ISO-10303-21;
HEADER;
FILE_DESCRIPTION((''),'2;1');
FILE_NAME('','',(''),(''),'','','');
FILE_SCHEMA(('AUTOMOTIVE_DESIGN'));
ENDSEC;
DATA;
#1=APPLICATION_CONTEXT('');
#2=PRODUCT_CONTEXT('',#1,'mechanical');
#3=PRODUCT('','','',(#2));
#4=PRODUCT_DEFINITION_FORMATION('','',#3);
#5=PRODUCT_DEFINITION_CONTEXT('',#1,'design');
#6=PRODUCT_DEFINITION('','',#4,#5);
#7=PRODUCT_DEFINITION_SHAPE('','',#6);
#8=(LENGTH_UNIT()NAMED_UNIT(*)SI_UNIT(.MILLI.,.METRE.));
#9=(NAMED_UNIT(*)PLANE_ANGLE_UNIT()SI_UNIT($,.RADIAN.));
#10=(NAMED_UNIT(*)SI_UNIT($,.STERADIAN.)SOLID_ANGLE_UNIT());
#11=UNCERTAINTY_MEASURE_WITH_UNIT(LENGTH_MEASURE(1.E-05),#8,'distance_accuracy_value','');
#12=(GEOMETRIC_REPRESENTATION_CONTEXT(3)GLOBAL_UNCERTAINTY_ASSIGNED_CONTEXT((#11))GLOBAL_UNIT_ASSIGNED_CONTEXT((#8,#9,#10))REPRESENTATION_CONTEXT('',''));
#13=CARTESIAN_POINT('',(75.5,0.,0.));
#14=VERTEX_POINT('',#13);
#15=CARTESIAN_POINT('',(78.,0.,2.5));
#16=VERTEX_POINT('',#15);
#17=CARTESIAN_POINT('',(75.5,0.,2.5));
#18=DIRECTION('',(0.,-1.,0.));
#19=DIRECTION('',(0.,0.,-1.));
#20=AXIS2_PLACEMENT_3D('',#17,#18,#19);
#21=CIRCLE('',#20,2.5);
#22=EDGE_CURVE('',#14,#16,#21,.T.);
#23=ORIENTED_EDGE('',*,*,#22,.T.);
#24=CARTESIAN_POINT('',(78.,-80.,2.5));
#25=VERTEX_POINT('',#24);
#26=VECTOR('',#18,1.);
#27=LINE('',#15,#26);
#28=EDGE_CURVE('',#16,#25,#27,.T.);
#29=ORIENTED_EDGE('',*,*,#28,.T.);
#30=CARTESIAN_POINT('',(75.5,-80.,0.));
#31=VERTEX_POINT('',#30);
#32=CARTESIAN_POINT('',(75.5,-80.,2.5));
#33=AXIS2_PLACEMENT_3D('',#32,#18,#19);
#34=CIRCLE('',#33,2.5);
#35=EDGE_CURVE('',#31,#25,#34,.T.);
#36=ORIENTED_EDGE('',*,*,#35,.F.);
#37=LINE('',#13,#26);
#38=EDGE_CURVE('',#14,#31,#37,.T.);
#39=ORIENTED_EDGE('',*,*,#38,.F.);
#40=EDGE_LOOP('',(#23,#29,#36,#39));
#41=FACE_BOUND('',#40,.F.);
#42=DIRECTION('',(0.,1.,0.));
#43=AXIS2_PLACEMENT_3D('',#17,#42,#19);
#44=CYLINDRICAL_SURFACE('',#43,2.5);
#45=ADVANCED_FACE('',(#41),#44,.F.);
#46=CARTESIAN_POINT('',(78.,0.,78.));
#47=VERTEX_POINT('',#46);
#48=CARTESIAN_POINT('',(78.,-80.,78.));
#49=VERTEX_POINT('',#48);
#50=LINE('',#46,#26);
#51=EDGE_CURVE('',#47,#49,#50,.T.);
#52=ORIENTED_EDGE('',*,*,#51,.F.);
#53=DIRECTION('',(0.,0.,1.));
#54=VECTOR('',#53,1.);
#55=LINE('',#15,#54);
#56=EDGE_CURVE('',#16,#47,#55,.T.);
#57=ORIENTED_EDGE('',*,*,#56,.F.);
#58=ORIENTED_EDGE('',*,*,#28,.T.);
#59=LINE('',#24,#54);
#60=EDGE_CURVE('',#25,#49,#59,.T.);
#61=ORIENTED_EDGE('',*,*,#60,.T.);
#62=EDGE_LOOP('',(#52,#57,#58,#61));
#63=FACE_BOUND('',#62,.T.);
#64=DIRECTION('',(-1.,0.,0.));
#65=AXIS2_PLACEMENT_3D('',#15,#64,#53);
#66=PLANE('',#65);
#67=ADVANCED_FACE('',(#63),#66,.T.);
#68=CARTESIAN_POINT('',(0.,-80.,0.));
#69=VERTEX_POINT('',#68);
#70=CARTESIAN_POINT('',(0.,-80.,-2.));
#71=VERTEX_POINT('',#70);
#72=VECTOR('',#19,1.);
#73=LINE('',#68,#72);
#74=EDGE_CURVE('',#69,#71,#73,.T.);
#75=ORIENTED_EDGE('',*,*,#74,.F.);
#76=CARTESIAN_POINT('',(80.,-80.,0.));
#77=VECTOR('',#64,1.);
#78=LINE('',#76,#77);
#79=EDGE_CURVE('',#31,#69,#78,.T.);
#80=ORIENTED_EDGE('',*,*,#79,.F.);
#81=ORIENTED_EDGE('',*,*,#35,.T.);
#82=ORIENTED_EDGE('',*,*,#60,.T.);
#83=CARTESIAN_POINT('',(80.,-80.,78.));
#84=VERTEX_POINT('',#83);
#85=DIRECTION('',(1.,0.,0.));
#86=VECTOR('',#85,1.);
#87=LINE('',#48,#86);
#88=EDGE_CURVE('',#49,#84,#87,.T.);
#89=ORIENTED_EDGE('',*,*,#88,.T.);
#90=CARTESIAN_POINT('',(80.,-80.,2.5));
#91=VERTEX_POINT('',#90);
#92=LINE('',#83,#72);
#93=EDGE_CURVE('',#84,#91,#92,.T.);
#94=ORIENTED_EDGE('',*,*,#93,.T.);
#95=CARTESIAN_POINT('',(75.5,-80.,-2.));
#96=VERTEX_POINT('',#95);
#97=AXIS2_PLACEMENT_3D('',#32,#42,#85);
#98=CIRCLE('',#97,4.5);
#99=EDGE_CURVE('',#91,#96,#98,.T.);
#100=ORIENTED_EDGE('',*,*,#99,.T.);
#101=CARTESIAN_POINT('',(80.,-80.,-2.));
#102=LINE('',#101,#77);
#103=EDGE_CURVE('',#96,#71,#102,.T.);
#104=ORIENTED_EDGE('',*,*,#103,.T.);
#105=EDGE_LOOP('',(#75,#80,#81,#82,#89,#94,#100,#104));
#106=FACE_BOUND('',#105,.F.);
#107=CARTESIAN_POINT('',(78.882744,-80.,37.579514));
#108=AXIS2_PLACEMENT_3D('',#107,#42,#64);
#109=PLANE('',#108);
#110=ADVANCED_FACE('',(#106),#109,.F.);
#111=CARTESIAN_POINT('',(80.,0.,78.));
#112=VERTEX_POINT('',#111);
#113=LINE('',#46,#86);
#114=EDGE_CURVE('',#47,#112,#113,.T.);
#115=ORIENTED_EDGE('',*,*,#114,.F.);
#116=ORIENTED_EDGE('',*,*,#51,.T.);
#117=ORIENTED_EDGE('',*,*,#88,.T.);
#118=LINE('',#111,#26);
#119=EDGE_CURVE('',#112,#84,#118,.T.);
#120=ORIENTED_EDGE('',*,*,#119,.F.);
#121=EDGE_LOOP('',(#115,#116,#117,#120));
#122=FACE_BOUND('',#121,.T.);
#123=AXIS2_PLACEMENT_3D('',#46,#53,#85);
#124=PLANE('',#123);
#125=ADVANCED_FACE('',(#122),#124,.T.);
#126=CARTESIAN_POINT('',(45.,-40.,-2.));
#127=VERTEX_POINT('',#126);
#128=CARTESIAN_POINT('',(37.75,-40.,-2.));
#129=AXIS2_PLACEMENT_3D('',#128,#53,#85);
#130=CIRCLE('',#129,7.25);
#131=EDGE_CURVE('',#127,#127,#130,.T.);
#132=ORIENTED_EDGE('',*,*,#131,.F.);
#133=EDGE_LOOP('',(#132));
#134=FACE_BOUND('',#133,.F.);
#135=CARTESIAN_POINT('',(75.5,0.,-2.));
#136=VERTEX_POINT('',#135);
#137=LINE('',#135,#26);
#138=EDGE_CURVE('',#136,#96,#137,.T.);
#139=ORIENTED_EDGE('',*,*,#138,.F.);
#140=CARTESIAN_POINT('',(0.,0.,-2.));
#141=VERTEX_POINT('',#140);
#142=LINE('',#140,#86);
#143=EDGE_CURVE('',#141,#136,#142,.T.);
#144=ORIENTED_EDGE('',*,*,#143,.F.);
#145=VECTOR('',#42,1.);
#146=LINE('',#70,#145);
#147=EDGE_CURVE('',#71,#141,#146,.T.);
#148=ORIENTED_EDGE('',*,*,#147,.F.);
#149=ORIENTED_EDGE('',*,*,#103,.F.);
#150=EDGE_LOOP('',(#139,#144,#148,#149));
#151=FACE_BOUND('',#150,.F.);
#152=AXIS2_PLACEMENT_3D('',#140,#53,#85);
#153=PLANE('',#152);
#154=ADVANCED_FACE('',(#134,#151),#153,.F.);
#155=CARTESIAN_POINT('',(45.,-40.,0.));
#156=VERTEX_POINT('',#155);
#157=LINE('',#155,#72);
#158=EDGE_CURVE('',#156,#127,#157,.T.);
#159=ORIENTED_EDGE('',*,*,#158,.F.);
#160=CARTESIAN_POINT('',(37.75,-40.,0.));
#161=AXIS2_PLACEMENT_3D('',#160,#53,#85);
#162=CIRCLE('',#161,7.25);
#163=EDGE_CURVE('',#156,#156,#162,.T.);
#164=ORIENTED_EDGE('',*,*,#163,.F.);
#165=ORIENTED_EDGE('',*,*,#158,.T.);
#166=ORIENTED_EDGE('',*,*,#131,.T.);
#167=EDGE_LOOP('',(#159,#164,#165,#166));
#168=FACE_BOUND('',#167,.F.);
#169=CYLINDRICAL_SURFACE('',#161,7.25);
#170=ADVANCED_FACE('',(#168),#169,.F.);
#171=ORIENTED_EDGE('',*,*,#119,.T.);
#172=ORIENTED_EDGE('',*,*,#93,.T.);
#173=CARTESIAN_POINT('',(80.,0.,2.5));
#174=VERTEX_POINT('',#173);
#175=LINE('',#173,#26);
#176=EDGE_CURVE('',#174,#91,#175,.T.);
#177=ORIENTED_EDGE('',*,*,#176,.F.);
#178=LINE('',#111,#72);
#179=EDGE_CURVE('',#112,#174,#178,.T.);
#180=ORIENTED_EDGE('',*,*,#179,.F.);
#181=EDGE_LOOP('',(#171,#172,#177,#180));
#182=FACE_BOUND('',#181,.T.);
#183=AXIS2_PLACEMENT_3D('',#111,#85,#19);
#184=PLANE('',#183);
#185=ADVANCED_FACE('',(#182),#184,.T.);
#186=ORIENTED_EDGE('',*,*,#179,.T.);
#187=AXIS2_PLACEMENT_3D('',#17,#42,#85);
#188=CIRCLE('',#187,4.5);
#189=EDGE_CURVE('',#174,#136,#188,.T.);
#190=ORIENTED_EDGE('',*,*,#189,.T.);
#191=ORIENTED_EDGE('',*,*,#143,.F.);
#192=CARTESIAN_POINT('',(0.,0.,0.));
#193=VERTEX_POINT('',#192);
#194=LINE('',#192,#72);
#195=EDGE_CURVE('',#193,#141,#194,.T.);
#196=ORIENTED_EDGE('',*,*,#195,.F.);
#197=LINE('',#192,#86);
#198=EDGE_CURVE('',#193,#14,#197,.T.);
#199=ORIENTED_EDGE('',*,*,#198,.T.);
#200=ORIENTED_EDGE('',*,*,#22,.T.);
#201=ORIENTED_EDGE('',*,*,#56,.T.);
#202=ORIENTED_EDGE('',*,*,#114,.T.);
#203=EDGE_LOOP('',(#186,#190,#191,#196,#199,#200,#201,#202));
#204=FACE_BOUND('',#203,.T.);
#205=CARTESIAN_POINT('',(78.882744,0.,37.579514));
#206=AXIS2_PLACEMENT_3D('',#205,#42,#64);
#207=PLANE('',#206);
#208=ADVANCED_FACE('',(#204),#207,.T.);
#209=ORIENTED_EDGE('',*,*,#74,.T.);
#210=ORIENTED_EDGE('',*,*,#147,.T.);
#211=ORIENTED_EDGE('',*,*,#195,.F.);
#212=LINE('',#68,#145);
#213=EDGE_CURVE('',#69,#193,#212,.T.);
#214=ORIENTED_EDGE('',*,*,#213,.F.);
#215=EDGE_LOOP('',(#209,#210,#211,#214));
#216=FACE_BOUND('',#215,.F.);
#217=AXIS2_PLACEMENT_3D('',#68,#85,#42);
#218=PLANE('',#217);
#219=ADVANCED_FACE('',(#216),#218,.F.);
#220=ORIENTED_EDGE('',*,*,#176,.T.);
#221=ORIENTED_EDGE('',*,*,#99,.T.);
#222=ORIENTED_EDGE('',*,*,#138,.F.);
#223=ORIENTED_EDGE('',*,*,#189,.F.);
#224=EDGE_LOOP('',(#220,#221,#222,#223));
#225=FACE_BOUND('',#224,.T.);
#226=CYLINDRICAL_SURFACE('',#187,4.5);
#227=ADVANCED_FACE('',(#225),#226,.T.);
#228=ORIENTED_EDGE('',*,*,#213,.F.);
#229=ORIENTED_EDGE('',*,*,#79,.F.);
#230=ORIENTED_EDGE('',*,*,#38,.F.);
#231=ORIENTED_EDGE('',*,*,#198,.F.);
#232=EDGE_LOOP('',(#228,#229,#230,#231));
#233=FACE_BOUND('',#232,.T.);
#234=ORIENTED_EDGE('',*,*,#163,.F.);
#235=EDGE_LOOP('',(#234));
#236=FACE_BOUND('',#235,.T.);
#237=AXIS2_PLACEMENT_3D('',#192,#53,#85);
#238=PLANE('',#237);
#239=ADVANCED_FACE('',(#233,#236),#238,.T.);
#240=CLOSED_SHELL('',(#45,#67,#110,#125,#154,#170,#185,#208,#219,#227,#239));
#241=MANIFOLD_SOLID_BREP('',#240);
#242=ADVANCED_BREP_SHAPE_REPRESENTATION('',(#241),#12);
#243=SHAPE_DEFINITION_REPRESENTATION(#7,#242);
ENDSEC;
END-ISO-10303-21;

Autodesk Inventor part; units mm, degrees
ref_plane "YZ Plane" through (0, 0, 0) normal (1, 0, 0) x (0, 1, 0)
ref_plane "XZ Plane" through (0, 0, 0) normal (0, 1, 0) x (-1, 0, 0)
ref_plane "XY Plane" through (0, 0, 0) normal (0, 0, 1) x (1, 0, 0)
sketch "Sketch1" plane through (0, 0, 0) normal (0, 0, 1) x (1, 0, 0)
  line L0 (0, 0) -> (80, 0)
  line L1 (80, 0) -> (80, -80)
  line L2 (80, -80) -> (0, -80)
  line L3 (0, -80) -> (0, 0)
  dimension "d0" = 80
  dimension "d1" = 80
extrude "Plate1" add sketch "Sketch1" against normal blind 2
sketch "Sketch2" plane through (78, 0, -2) normal (1, 0, 0) x (0, 1, 0)
  line L0 (-80, 0) -> (0, 0)
  line L1 (0, 0) -> (0, 80)
  line L2 (0, 80) -> (-80, 80)
  line L3 (-80, 80) -> (-80, 0)
edge flange "Flange1" height 80 angle 90 thickness 2 bend radius 2.5 thickness toward (1, 0, 0) relief round relief width 2 relief depth 1 edges at (80, -40, 0) wall of the first edge with corners at (78, -80, -2) (78, 0, -2) (78, 0, 78) (78, -80, 78)
bend "Bend1"
corner "Corner1"
sketch "Sketch3" plane through (0, 0, 0) normal (0, 0, 1) x (1, 0, 0)
  line L0 (75.5, 0) -> (0, 0) projected
  line L1 (75.5, -80) -> (75.5, 0) projected
  line L2 (0, 0) -> (75.5, -80) construction
  circle A0 centre (37.75, -40) radius 7.25
  dimension "d13" = 14.5
extrude "Extrusion1" cut sketch "Sketch3" against normal through all
equation "\"d2\" = Thickness"
equation "\"d3\" = BendReliefWidth"
equation "\"d4\" = BendReliefDepth"
equation "\"d5\" = MinimumRemnant"
equation "\"d6\" = TransitionRadius"
equation "\"d9\" = BendRadius"
equation "\"d10\" = CornerReliefSize"
equation "\"d11\" = GapSize"
equation "\"d12\" = JacobiRadiusSize"
equation "\"BendReliefWidth\" = Thickness"
equation "\"BendReliefDepth\" = 0.5 * Thickness"
equation "\"CornerReliefSize\" = 4 * Thickness"
equation "\"MinimumRemnant\" = 2 * Thickness"
equation "\"TransitionRadius\" = BendRadius"
equation "\"JacobiRadiusSize\" = BendRadius"
equation "\"GapSize\" = Thickness"
equation "\"Thickness\" = 2"
equation "\"BendRadius\" = 2.5"
properties part number "ASY MSC Мостики уголок" material "Stainless Steel"
